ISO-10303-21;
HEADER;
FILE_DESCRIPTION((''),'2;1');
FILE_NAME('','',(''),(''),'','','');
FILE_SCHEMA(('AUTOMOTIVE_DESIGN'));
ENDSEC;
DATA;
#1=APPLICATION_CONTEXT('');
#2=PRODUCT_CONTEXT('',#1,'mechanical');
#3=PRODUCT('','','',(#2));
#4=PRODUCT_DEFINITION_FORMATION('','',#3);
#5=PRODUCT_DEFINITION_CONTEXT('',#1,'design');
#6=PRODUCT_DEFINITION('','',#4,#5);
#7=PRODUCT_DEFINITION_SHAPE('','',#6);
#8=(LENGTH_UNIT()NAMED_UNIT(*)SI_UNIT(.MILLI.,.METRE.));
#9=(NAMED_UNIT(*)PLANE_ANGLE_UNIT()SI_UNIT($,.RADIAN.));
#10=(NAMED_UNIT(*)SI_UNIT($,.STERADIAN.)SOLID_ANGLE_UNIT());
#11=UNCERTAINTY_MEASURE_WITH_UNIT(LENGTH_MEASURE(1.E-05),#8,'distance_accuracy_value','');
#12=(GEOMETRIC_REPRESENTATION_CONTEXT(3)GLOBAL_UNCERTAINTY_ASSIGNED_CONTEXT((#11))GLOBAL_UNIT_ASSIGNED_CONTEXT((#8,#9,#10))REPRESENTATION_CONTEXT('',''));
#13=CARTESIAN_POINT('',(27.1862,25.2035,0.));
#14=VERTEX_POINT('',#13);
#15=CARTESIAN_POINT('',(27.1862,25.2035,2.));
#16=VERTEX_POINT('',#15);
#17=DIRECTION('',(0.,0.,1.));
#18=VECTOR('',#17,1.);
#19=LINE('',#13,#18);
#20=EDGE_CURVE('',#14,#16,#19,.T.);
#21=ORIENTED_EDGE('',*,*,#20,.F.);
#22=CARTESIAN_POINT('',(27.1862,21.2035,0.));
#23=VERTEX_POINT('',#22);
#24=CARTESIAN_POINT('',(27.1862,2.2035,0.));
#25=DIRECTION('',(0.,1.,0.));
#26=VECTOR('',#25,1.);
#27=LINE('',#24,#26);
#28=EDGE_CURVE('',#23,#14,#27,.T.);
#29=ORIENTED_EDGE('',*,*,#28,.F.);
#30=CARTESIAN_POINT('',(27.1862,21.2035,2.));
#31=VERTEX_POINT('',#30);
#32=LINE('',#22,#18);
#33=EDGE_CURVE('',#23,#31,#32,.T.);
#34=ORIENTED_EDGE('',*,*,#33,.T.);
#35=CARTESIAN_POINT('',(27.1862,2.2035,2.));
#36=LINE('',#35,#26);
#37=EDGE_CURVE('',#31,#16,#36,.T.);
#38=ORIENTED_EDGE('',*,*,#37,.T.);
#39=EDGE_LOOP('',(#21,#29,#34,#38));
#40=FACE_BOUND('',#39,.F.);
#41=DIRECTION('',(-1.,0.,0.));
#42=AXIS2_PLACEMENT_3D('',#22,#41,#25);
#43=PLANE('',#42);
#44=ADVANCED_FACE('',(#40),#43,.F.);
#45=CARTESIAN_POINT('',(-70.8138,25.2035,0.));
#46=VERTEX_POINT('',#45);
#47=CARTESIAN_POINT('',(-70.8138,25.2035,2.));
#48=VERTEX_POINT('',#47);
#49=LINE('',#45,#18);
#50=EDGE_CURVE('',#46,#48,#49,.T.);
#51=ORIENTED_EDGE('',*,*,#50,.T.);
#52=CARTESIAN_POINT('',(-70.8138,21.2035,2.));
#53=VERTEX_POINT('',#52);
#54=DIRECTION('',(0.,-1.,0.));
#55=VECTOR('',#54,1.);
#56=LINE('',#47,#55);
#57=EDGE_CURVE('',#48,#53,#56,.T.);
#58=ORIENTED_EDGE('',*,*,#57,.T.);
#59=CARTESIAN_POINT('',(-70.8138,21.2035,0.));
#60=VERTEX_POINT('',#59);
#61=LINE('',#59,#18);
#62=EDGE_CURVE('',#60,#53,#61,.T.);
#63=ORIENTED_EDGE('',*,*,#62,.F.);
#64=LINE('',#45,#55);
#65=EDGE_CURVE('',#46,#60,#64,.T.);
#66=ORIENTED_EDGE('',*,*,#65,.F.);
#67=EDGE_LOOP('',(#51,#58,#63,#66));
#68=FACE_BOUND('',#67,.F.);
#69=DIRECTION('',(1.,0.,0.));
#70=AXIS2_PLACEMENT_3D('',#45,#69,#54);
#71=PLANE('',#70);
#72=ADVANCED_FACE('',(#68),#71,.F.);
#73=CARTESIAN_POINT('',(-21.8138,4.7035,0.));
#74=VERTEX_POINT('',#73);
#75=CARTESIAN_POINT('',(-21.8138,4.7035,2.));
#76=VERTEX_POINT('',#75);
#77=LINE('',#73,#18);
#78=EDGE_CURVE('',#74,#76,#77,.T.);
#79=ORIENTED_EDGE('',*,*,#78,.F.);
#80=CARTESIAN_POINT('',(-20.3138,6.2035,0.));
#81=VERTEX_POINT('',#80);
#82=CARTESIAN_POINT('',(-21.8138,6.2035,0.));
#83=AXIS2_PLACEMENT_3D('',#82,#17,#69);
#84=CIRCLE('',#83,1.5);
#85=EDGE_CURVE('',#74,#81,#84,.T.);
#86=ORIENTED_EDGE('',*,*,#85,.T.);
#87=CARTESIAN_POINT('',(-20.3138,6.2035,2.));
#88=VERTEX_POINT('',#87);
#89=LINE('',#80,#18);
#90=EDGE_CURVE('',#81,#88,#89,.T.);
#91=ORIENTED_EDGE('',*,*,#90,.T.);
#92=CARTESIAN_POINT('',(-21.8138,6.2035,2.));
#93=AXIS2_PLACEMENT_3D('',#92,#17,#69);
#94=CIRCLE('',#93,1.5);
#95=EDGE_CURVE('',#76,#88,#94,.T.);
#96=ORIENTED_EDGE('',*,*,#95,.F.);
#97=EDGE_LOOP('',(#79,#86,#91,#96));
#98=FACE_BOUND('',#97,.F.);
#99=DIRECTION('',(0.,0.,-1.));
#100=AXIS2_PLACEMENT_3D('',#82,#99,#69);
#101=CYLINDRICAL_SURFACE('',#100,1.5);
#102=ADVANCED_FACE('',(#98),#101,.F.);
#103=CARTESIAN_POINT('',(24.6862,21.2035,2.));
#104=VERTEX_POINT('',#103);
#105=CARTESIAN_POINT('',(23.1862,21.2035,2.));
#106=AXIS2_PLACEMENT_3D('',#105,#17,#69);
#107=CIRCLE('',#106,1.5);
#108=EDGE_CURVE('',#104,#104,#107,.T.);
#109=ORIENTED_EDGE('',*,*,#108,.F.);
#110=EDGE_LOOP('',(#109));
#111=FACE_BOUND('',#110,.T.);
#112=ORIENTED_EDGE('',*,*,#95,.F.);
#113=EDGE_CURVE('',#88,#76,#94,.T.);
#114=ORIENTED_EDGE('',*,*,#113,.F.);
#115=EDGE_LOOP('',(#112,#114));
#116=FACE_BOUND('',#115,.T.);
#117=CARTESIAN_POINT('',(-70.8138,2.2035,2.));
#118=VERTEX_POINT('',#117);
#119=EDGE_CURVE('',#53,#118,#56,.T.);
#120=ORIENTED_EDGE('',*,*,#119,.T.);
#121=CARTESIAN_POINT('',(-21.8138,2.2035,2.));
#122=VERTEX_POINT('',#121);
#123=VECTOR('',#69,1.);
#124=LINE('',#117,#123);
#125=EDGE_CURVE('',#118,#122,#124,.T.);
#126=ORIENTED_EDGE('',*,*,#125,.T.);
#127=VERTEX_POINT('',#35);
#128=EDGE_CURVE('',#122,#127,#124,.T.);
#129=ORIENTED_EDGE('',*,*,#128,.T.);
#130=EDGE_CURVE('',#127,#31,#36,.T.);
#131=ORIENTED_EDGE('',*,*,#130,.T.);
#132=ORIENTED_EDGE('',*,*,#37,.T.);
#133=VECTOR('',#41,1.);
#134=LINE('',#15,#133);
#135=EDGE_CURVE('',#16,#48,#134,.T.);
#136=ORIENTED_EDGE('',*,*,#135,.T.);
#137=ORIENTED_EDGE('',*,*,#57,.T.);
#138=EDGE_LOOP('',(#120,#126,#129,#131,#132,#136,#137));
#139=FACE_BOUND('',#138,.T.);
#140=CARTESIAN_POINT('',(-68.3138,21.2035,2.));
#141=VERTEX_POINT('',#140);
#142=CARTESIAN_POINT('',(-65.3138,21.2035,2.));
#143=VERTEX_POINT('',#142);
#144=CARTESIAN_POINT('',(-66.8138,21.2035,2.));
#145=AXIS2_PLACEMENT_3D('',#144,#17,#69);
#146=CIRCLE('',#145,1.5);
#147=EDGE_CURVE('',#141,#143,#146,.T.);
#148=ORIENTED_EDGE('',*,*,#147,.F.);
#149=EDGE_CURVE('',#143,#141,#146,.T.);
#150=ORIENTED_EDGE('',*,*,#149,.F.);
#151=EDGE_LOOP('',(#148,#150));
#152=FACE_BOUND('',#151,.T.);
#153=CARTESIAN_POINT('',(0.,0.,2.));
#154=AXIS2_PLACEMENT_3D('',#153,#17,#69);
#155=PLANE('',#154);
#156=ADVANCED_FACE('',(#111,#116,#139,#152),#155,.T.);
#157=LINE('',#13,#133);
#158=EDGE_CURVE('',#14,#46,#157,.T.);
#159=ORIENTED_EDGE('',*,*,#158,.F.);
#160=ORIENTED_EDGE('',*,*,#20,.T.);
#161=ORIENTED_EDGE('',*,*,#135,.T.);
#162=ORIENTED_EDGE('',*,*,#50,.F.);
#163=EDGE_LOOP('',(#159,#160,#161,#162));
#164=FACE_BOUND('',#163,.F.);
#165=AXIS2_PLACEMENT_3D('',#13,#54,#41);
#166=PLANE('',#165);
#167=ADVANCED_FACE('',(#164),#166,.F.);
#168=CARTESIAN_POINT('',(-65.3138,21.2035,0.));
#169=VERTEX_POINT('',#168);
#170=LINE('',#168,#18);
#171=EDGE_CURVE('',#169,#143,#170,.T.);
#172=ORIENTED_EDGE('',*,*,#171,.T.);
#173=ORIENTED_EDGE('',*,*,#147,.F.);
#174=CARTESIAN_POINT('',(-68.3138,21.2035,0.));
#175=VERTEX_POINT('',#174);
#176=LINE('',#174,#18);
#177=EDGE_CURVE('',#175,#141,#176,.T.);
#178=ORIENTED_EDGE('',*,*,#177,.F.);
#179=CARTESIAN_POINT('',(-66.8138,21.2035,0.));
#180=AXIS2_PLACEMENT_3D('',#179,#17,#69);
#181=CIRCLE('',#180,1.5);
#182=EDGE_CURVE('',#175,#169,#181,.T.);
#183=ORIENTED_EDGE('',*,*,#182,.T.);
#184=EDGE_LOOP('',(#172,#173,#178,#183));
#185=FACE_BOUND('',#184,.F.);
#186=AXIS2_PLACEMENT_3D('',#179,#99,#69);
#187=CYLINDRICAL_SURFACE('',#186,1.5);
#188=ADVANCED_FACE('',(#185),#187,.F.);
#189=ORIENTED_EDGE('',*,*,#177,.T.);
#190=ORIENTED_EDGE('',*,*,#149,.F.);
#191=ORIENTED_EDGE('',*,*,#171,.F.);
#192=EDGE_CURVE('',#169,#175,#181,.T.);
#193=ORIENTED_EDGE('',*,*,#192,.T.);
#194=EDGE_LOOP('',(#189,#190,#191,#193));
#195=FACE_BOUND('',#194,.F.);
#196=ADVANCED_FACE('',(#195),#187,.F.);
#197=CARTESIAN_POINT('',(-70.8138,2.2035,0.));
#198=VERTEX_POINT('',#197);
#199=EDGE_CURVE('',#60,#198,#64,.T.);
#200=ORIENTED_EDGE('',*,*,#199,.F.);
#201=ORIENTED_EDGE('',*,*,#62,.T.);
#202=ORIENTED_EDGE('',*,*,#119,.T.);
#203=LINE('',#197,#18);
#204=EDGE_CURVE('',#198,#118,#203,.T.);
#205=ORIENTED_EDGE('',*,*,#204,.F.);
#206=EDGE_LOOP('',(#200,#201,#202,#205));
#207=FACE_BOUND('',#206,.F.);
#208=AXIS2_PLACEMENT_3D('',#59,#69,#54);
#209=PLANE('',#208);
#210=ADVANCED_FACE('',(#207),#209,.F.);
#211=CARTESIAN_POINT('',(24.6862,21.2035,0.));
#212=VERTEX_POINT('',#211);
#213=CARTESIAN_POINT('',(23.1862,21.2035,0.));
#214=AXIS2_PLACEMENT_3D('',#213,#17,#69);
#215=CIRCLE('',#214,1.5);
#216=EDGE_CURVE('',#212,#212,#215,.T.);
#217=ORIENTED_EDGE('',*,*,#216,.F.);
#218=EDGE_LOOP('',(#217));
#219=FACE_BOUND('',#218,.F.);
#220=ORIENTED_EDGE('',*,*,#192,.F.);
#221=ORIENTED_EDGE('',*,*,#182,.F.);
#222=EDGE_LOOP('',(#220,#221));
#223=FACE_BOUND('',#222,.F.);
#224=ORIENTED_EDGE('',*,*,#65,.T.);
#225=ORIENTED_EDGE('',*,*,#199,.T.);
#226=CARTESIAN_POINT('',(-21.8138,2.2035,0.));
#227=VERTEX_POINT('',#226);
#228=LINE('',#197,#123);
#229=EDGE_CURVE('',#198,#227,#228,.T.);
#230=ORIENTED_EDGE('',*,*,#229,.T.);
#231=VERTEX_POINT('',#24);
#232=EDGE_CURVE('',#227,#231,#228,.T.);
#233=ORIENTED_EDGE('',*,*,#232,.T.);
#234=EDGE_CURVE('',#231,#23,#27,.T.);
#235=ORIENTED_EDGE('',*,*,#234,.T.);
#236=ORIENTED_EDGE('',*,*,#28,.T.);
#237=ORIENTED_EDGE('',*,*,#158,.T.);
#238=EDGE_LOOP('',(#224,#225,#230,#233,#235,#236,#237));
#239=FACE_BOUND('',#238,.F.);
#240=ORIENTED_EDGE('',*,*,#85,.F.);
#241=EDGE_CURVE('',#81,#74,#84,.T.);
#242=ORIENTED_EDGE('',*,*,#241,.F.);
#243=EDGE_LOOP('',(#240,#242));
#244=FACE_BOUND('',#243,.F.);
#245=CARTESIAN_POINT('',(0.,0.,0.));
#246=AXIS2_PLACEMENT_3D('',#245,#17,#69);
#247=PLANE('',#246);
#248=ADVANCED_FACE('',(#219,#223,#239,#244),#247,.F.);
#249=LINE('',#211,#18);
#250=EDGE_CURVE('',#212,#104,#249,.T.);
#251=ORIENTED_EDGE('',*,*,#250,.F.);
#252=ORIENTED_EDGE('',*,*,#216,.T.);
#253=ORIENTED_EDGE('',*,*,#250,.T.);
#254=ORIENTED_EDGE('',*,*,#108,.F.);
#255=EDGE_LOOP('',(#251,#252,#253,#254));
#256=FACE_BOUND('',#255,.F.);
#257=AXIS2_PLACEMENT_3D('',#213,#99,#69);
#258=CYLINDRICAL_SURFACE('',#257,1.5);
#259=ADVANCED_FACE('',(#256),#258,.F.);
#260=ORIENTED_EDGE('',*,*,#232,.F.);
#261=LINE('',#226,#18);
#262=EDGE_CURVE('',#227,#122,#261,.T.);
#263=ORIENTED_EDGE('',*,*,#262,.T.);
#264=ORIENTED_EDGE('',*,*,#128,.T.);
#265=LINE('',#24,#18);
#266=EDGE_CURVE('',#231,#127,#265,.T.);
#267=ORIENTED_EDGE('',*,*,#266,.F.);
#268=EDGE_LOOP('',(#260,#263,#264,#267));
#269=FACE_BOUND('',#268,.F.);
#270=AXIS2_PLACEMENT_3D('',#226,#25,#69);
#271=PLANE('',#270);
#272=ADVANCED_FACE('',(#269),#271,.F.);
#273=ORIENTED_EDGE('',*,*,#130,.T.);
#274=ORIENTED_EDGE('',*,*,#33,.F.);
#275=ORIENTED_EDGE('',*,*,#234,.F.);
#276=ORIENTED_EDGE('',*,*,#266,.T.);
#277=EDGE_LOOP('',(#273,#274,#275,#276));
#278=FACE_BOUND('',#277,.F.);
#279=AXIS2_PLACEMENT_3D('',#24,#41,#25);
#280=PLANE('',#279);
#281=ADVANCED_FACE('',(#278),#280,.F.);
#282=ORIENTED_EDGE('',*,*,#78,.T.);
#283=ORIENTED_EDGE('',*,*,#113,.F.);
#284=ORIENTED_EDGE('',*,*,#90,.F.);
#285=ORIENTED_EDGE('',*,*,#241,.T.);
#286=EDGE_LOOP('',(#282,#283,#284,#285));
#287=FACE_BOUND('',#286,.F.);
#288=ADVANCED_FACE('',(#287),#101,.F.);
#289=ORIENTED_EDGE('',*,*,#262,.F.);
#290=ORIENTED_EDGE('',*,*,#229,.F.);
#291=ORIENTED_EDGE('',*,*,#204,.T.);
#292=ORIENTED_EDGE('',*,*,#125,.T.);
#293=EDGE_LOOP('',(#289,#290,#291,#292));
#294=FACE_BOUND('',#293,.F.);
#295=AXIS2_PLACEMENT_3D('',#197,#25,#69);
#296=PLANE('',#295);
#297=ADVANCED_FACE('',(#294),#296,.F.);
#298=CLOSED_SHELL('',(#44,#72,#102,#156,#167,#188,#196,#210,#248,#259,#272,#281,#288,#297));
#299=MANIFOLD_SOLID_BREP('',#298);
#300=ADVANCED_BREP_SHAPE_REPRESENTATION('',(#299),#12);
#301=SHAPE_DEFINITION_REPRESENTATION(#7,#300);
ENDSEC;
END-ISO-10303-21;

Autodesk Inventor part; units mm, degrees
ref_plane "YZ Plane" through (0, 0, 0) normal (1, 0, 0) x (0, 1, 0)
ref_plane "XZ Plane" through (0, 0, 0) normal (0, 1, 0) x (-1, 0, 0)
ref_plane "XY Plane" through (0, 0, 0) normal (0, 0, 1) x (1, 0, 0)
sketch "Sketch1" plane through (0, 0, 0) normal (0, 0, 1) x (1, 0, 0)
  line L0 (27.1862, 25.2035) -> (-70.8138, 25.2035)
  line L1 (-70.8138, 25.2035) -> (-70.8138, 2.2035)
  line L2 (-70.8138, 2.2035) -> (27.1862, 2.2035)
  line L3 (27.1862, 2.2035) -> (27.1862, 25.2035)
  line L4 (27.1862, 25.2035) -> (27.1862, 21.2035)
  line L5 (27.1862, 21.2035) -> (23.1862, 21.2035)
  circle A0 centre (23.1862, 21.2035) radius 1.5
  line L6 (-70.8138, 25.2035) -> (-70.8138, 21.2035)
  line L7 (-70.8138, 21.2035) -> (-66.8138, 21.2035)
  circle A1 centre (-66.8138, 21.2035) radius 1.5
  line L8 (-21.8138, 2.2035) -> (-21.8138, 6.2035)
  circle A2 centre (-21.8138, 6.2035) radius 1.5
  point P0 (0, 0)
  dimension "d0" = 98
  dimension "d1" = 23
  dimension "d2" = 4
  dimension "d3" = 4
  dimension "d4" = 3
  dimension "d5" = 4
  dimension "d6" = 4
  dimension "d7" = 3
  dimension "d8" = 4
  dimension "d9" = 3
extrude "Extrusion1" add sketch "Sketch1" along normal blind 2
properties part number "konektor kort"
